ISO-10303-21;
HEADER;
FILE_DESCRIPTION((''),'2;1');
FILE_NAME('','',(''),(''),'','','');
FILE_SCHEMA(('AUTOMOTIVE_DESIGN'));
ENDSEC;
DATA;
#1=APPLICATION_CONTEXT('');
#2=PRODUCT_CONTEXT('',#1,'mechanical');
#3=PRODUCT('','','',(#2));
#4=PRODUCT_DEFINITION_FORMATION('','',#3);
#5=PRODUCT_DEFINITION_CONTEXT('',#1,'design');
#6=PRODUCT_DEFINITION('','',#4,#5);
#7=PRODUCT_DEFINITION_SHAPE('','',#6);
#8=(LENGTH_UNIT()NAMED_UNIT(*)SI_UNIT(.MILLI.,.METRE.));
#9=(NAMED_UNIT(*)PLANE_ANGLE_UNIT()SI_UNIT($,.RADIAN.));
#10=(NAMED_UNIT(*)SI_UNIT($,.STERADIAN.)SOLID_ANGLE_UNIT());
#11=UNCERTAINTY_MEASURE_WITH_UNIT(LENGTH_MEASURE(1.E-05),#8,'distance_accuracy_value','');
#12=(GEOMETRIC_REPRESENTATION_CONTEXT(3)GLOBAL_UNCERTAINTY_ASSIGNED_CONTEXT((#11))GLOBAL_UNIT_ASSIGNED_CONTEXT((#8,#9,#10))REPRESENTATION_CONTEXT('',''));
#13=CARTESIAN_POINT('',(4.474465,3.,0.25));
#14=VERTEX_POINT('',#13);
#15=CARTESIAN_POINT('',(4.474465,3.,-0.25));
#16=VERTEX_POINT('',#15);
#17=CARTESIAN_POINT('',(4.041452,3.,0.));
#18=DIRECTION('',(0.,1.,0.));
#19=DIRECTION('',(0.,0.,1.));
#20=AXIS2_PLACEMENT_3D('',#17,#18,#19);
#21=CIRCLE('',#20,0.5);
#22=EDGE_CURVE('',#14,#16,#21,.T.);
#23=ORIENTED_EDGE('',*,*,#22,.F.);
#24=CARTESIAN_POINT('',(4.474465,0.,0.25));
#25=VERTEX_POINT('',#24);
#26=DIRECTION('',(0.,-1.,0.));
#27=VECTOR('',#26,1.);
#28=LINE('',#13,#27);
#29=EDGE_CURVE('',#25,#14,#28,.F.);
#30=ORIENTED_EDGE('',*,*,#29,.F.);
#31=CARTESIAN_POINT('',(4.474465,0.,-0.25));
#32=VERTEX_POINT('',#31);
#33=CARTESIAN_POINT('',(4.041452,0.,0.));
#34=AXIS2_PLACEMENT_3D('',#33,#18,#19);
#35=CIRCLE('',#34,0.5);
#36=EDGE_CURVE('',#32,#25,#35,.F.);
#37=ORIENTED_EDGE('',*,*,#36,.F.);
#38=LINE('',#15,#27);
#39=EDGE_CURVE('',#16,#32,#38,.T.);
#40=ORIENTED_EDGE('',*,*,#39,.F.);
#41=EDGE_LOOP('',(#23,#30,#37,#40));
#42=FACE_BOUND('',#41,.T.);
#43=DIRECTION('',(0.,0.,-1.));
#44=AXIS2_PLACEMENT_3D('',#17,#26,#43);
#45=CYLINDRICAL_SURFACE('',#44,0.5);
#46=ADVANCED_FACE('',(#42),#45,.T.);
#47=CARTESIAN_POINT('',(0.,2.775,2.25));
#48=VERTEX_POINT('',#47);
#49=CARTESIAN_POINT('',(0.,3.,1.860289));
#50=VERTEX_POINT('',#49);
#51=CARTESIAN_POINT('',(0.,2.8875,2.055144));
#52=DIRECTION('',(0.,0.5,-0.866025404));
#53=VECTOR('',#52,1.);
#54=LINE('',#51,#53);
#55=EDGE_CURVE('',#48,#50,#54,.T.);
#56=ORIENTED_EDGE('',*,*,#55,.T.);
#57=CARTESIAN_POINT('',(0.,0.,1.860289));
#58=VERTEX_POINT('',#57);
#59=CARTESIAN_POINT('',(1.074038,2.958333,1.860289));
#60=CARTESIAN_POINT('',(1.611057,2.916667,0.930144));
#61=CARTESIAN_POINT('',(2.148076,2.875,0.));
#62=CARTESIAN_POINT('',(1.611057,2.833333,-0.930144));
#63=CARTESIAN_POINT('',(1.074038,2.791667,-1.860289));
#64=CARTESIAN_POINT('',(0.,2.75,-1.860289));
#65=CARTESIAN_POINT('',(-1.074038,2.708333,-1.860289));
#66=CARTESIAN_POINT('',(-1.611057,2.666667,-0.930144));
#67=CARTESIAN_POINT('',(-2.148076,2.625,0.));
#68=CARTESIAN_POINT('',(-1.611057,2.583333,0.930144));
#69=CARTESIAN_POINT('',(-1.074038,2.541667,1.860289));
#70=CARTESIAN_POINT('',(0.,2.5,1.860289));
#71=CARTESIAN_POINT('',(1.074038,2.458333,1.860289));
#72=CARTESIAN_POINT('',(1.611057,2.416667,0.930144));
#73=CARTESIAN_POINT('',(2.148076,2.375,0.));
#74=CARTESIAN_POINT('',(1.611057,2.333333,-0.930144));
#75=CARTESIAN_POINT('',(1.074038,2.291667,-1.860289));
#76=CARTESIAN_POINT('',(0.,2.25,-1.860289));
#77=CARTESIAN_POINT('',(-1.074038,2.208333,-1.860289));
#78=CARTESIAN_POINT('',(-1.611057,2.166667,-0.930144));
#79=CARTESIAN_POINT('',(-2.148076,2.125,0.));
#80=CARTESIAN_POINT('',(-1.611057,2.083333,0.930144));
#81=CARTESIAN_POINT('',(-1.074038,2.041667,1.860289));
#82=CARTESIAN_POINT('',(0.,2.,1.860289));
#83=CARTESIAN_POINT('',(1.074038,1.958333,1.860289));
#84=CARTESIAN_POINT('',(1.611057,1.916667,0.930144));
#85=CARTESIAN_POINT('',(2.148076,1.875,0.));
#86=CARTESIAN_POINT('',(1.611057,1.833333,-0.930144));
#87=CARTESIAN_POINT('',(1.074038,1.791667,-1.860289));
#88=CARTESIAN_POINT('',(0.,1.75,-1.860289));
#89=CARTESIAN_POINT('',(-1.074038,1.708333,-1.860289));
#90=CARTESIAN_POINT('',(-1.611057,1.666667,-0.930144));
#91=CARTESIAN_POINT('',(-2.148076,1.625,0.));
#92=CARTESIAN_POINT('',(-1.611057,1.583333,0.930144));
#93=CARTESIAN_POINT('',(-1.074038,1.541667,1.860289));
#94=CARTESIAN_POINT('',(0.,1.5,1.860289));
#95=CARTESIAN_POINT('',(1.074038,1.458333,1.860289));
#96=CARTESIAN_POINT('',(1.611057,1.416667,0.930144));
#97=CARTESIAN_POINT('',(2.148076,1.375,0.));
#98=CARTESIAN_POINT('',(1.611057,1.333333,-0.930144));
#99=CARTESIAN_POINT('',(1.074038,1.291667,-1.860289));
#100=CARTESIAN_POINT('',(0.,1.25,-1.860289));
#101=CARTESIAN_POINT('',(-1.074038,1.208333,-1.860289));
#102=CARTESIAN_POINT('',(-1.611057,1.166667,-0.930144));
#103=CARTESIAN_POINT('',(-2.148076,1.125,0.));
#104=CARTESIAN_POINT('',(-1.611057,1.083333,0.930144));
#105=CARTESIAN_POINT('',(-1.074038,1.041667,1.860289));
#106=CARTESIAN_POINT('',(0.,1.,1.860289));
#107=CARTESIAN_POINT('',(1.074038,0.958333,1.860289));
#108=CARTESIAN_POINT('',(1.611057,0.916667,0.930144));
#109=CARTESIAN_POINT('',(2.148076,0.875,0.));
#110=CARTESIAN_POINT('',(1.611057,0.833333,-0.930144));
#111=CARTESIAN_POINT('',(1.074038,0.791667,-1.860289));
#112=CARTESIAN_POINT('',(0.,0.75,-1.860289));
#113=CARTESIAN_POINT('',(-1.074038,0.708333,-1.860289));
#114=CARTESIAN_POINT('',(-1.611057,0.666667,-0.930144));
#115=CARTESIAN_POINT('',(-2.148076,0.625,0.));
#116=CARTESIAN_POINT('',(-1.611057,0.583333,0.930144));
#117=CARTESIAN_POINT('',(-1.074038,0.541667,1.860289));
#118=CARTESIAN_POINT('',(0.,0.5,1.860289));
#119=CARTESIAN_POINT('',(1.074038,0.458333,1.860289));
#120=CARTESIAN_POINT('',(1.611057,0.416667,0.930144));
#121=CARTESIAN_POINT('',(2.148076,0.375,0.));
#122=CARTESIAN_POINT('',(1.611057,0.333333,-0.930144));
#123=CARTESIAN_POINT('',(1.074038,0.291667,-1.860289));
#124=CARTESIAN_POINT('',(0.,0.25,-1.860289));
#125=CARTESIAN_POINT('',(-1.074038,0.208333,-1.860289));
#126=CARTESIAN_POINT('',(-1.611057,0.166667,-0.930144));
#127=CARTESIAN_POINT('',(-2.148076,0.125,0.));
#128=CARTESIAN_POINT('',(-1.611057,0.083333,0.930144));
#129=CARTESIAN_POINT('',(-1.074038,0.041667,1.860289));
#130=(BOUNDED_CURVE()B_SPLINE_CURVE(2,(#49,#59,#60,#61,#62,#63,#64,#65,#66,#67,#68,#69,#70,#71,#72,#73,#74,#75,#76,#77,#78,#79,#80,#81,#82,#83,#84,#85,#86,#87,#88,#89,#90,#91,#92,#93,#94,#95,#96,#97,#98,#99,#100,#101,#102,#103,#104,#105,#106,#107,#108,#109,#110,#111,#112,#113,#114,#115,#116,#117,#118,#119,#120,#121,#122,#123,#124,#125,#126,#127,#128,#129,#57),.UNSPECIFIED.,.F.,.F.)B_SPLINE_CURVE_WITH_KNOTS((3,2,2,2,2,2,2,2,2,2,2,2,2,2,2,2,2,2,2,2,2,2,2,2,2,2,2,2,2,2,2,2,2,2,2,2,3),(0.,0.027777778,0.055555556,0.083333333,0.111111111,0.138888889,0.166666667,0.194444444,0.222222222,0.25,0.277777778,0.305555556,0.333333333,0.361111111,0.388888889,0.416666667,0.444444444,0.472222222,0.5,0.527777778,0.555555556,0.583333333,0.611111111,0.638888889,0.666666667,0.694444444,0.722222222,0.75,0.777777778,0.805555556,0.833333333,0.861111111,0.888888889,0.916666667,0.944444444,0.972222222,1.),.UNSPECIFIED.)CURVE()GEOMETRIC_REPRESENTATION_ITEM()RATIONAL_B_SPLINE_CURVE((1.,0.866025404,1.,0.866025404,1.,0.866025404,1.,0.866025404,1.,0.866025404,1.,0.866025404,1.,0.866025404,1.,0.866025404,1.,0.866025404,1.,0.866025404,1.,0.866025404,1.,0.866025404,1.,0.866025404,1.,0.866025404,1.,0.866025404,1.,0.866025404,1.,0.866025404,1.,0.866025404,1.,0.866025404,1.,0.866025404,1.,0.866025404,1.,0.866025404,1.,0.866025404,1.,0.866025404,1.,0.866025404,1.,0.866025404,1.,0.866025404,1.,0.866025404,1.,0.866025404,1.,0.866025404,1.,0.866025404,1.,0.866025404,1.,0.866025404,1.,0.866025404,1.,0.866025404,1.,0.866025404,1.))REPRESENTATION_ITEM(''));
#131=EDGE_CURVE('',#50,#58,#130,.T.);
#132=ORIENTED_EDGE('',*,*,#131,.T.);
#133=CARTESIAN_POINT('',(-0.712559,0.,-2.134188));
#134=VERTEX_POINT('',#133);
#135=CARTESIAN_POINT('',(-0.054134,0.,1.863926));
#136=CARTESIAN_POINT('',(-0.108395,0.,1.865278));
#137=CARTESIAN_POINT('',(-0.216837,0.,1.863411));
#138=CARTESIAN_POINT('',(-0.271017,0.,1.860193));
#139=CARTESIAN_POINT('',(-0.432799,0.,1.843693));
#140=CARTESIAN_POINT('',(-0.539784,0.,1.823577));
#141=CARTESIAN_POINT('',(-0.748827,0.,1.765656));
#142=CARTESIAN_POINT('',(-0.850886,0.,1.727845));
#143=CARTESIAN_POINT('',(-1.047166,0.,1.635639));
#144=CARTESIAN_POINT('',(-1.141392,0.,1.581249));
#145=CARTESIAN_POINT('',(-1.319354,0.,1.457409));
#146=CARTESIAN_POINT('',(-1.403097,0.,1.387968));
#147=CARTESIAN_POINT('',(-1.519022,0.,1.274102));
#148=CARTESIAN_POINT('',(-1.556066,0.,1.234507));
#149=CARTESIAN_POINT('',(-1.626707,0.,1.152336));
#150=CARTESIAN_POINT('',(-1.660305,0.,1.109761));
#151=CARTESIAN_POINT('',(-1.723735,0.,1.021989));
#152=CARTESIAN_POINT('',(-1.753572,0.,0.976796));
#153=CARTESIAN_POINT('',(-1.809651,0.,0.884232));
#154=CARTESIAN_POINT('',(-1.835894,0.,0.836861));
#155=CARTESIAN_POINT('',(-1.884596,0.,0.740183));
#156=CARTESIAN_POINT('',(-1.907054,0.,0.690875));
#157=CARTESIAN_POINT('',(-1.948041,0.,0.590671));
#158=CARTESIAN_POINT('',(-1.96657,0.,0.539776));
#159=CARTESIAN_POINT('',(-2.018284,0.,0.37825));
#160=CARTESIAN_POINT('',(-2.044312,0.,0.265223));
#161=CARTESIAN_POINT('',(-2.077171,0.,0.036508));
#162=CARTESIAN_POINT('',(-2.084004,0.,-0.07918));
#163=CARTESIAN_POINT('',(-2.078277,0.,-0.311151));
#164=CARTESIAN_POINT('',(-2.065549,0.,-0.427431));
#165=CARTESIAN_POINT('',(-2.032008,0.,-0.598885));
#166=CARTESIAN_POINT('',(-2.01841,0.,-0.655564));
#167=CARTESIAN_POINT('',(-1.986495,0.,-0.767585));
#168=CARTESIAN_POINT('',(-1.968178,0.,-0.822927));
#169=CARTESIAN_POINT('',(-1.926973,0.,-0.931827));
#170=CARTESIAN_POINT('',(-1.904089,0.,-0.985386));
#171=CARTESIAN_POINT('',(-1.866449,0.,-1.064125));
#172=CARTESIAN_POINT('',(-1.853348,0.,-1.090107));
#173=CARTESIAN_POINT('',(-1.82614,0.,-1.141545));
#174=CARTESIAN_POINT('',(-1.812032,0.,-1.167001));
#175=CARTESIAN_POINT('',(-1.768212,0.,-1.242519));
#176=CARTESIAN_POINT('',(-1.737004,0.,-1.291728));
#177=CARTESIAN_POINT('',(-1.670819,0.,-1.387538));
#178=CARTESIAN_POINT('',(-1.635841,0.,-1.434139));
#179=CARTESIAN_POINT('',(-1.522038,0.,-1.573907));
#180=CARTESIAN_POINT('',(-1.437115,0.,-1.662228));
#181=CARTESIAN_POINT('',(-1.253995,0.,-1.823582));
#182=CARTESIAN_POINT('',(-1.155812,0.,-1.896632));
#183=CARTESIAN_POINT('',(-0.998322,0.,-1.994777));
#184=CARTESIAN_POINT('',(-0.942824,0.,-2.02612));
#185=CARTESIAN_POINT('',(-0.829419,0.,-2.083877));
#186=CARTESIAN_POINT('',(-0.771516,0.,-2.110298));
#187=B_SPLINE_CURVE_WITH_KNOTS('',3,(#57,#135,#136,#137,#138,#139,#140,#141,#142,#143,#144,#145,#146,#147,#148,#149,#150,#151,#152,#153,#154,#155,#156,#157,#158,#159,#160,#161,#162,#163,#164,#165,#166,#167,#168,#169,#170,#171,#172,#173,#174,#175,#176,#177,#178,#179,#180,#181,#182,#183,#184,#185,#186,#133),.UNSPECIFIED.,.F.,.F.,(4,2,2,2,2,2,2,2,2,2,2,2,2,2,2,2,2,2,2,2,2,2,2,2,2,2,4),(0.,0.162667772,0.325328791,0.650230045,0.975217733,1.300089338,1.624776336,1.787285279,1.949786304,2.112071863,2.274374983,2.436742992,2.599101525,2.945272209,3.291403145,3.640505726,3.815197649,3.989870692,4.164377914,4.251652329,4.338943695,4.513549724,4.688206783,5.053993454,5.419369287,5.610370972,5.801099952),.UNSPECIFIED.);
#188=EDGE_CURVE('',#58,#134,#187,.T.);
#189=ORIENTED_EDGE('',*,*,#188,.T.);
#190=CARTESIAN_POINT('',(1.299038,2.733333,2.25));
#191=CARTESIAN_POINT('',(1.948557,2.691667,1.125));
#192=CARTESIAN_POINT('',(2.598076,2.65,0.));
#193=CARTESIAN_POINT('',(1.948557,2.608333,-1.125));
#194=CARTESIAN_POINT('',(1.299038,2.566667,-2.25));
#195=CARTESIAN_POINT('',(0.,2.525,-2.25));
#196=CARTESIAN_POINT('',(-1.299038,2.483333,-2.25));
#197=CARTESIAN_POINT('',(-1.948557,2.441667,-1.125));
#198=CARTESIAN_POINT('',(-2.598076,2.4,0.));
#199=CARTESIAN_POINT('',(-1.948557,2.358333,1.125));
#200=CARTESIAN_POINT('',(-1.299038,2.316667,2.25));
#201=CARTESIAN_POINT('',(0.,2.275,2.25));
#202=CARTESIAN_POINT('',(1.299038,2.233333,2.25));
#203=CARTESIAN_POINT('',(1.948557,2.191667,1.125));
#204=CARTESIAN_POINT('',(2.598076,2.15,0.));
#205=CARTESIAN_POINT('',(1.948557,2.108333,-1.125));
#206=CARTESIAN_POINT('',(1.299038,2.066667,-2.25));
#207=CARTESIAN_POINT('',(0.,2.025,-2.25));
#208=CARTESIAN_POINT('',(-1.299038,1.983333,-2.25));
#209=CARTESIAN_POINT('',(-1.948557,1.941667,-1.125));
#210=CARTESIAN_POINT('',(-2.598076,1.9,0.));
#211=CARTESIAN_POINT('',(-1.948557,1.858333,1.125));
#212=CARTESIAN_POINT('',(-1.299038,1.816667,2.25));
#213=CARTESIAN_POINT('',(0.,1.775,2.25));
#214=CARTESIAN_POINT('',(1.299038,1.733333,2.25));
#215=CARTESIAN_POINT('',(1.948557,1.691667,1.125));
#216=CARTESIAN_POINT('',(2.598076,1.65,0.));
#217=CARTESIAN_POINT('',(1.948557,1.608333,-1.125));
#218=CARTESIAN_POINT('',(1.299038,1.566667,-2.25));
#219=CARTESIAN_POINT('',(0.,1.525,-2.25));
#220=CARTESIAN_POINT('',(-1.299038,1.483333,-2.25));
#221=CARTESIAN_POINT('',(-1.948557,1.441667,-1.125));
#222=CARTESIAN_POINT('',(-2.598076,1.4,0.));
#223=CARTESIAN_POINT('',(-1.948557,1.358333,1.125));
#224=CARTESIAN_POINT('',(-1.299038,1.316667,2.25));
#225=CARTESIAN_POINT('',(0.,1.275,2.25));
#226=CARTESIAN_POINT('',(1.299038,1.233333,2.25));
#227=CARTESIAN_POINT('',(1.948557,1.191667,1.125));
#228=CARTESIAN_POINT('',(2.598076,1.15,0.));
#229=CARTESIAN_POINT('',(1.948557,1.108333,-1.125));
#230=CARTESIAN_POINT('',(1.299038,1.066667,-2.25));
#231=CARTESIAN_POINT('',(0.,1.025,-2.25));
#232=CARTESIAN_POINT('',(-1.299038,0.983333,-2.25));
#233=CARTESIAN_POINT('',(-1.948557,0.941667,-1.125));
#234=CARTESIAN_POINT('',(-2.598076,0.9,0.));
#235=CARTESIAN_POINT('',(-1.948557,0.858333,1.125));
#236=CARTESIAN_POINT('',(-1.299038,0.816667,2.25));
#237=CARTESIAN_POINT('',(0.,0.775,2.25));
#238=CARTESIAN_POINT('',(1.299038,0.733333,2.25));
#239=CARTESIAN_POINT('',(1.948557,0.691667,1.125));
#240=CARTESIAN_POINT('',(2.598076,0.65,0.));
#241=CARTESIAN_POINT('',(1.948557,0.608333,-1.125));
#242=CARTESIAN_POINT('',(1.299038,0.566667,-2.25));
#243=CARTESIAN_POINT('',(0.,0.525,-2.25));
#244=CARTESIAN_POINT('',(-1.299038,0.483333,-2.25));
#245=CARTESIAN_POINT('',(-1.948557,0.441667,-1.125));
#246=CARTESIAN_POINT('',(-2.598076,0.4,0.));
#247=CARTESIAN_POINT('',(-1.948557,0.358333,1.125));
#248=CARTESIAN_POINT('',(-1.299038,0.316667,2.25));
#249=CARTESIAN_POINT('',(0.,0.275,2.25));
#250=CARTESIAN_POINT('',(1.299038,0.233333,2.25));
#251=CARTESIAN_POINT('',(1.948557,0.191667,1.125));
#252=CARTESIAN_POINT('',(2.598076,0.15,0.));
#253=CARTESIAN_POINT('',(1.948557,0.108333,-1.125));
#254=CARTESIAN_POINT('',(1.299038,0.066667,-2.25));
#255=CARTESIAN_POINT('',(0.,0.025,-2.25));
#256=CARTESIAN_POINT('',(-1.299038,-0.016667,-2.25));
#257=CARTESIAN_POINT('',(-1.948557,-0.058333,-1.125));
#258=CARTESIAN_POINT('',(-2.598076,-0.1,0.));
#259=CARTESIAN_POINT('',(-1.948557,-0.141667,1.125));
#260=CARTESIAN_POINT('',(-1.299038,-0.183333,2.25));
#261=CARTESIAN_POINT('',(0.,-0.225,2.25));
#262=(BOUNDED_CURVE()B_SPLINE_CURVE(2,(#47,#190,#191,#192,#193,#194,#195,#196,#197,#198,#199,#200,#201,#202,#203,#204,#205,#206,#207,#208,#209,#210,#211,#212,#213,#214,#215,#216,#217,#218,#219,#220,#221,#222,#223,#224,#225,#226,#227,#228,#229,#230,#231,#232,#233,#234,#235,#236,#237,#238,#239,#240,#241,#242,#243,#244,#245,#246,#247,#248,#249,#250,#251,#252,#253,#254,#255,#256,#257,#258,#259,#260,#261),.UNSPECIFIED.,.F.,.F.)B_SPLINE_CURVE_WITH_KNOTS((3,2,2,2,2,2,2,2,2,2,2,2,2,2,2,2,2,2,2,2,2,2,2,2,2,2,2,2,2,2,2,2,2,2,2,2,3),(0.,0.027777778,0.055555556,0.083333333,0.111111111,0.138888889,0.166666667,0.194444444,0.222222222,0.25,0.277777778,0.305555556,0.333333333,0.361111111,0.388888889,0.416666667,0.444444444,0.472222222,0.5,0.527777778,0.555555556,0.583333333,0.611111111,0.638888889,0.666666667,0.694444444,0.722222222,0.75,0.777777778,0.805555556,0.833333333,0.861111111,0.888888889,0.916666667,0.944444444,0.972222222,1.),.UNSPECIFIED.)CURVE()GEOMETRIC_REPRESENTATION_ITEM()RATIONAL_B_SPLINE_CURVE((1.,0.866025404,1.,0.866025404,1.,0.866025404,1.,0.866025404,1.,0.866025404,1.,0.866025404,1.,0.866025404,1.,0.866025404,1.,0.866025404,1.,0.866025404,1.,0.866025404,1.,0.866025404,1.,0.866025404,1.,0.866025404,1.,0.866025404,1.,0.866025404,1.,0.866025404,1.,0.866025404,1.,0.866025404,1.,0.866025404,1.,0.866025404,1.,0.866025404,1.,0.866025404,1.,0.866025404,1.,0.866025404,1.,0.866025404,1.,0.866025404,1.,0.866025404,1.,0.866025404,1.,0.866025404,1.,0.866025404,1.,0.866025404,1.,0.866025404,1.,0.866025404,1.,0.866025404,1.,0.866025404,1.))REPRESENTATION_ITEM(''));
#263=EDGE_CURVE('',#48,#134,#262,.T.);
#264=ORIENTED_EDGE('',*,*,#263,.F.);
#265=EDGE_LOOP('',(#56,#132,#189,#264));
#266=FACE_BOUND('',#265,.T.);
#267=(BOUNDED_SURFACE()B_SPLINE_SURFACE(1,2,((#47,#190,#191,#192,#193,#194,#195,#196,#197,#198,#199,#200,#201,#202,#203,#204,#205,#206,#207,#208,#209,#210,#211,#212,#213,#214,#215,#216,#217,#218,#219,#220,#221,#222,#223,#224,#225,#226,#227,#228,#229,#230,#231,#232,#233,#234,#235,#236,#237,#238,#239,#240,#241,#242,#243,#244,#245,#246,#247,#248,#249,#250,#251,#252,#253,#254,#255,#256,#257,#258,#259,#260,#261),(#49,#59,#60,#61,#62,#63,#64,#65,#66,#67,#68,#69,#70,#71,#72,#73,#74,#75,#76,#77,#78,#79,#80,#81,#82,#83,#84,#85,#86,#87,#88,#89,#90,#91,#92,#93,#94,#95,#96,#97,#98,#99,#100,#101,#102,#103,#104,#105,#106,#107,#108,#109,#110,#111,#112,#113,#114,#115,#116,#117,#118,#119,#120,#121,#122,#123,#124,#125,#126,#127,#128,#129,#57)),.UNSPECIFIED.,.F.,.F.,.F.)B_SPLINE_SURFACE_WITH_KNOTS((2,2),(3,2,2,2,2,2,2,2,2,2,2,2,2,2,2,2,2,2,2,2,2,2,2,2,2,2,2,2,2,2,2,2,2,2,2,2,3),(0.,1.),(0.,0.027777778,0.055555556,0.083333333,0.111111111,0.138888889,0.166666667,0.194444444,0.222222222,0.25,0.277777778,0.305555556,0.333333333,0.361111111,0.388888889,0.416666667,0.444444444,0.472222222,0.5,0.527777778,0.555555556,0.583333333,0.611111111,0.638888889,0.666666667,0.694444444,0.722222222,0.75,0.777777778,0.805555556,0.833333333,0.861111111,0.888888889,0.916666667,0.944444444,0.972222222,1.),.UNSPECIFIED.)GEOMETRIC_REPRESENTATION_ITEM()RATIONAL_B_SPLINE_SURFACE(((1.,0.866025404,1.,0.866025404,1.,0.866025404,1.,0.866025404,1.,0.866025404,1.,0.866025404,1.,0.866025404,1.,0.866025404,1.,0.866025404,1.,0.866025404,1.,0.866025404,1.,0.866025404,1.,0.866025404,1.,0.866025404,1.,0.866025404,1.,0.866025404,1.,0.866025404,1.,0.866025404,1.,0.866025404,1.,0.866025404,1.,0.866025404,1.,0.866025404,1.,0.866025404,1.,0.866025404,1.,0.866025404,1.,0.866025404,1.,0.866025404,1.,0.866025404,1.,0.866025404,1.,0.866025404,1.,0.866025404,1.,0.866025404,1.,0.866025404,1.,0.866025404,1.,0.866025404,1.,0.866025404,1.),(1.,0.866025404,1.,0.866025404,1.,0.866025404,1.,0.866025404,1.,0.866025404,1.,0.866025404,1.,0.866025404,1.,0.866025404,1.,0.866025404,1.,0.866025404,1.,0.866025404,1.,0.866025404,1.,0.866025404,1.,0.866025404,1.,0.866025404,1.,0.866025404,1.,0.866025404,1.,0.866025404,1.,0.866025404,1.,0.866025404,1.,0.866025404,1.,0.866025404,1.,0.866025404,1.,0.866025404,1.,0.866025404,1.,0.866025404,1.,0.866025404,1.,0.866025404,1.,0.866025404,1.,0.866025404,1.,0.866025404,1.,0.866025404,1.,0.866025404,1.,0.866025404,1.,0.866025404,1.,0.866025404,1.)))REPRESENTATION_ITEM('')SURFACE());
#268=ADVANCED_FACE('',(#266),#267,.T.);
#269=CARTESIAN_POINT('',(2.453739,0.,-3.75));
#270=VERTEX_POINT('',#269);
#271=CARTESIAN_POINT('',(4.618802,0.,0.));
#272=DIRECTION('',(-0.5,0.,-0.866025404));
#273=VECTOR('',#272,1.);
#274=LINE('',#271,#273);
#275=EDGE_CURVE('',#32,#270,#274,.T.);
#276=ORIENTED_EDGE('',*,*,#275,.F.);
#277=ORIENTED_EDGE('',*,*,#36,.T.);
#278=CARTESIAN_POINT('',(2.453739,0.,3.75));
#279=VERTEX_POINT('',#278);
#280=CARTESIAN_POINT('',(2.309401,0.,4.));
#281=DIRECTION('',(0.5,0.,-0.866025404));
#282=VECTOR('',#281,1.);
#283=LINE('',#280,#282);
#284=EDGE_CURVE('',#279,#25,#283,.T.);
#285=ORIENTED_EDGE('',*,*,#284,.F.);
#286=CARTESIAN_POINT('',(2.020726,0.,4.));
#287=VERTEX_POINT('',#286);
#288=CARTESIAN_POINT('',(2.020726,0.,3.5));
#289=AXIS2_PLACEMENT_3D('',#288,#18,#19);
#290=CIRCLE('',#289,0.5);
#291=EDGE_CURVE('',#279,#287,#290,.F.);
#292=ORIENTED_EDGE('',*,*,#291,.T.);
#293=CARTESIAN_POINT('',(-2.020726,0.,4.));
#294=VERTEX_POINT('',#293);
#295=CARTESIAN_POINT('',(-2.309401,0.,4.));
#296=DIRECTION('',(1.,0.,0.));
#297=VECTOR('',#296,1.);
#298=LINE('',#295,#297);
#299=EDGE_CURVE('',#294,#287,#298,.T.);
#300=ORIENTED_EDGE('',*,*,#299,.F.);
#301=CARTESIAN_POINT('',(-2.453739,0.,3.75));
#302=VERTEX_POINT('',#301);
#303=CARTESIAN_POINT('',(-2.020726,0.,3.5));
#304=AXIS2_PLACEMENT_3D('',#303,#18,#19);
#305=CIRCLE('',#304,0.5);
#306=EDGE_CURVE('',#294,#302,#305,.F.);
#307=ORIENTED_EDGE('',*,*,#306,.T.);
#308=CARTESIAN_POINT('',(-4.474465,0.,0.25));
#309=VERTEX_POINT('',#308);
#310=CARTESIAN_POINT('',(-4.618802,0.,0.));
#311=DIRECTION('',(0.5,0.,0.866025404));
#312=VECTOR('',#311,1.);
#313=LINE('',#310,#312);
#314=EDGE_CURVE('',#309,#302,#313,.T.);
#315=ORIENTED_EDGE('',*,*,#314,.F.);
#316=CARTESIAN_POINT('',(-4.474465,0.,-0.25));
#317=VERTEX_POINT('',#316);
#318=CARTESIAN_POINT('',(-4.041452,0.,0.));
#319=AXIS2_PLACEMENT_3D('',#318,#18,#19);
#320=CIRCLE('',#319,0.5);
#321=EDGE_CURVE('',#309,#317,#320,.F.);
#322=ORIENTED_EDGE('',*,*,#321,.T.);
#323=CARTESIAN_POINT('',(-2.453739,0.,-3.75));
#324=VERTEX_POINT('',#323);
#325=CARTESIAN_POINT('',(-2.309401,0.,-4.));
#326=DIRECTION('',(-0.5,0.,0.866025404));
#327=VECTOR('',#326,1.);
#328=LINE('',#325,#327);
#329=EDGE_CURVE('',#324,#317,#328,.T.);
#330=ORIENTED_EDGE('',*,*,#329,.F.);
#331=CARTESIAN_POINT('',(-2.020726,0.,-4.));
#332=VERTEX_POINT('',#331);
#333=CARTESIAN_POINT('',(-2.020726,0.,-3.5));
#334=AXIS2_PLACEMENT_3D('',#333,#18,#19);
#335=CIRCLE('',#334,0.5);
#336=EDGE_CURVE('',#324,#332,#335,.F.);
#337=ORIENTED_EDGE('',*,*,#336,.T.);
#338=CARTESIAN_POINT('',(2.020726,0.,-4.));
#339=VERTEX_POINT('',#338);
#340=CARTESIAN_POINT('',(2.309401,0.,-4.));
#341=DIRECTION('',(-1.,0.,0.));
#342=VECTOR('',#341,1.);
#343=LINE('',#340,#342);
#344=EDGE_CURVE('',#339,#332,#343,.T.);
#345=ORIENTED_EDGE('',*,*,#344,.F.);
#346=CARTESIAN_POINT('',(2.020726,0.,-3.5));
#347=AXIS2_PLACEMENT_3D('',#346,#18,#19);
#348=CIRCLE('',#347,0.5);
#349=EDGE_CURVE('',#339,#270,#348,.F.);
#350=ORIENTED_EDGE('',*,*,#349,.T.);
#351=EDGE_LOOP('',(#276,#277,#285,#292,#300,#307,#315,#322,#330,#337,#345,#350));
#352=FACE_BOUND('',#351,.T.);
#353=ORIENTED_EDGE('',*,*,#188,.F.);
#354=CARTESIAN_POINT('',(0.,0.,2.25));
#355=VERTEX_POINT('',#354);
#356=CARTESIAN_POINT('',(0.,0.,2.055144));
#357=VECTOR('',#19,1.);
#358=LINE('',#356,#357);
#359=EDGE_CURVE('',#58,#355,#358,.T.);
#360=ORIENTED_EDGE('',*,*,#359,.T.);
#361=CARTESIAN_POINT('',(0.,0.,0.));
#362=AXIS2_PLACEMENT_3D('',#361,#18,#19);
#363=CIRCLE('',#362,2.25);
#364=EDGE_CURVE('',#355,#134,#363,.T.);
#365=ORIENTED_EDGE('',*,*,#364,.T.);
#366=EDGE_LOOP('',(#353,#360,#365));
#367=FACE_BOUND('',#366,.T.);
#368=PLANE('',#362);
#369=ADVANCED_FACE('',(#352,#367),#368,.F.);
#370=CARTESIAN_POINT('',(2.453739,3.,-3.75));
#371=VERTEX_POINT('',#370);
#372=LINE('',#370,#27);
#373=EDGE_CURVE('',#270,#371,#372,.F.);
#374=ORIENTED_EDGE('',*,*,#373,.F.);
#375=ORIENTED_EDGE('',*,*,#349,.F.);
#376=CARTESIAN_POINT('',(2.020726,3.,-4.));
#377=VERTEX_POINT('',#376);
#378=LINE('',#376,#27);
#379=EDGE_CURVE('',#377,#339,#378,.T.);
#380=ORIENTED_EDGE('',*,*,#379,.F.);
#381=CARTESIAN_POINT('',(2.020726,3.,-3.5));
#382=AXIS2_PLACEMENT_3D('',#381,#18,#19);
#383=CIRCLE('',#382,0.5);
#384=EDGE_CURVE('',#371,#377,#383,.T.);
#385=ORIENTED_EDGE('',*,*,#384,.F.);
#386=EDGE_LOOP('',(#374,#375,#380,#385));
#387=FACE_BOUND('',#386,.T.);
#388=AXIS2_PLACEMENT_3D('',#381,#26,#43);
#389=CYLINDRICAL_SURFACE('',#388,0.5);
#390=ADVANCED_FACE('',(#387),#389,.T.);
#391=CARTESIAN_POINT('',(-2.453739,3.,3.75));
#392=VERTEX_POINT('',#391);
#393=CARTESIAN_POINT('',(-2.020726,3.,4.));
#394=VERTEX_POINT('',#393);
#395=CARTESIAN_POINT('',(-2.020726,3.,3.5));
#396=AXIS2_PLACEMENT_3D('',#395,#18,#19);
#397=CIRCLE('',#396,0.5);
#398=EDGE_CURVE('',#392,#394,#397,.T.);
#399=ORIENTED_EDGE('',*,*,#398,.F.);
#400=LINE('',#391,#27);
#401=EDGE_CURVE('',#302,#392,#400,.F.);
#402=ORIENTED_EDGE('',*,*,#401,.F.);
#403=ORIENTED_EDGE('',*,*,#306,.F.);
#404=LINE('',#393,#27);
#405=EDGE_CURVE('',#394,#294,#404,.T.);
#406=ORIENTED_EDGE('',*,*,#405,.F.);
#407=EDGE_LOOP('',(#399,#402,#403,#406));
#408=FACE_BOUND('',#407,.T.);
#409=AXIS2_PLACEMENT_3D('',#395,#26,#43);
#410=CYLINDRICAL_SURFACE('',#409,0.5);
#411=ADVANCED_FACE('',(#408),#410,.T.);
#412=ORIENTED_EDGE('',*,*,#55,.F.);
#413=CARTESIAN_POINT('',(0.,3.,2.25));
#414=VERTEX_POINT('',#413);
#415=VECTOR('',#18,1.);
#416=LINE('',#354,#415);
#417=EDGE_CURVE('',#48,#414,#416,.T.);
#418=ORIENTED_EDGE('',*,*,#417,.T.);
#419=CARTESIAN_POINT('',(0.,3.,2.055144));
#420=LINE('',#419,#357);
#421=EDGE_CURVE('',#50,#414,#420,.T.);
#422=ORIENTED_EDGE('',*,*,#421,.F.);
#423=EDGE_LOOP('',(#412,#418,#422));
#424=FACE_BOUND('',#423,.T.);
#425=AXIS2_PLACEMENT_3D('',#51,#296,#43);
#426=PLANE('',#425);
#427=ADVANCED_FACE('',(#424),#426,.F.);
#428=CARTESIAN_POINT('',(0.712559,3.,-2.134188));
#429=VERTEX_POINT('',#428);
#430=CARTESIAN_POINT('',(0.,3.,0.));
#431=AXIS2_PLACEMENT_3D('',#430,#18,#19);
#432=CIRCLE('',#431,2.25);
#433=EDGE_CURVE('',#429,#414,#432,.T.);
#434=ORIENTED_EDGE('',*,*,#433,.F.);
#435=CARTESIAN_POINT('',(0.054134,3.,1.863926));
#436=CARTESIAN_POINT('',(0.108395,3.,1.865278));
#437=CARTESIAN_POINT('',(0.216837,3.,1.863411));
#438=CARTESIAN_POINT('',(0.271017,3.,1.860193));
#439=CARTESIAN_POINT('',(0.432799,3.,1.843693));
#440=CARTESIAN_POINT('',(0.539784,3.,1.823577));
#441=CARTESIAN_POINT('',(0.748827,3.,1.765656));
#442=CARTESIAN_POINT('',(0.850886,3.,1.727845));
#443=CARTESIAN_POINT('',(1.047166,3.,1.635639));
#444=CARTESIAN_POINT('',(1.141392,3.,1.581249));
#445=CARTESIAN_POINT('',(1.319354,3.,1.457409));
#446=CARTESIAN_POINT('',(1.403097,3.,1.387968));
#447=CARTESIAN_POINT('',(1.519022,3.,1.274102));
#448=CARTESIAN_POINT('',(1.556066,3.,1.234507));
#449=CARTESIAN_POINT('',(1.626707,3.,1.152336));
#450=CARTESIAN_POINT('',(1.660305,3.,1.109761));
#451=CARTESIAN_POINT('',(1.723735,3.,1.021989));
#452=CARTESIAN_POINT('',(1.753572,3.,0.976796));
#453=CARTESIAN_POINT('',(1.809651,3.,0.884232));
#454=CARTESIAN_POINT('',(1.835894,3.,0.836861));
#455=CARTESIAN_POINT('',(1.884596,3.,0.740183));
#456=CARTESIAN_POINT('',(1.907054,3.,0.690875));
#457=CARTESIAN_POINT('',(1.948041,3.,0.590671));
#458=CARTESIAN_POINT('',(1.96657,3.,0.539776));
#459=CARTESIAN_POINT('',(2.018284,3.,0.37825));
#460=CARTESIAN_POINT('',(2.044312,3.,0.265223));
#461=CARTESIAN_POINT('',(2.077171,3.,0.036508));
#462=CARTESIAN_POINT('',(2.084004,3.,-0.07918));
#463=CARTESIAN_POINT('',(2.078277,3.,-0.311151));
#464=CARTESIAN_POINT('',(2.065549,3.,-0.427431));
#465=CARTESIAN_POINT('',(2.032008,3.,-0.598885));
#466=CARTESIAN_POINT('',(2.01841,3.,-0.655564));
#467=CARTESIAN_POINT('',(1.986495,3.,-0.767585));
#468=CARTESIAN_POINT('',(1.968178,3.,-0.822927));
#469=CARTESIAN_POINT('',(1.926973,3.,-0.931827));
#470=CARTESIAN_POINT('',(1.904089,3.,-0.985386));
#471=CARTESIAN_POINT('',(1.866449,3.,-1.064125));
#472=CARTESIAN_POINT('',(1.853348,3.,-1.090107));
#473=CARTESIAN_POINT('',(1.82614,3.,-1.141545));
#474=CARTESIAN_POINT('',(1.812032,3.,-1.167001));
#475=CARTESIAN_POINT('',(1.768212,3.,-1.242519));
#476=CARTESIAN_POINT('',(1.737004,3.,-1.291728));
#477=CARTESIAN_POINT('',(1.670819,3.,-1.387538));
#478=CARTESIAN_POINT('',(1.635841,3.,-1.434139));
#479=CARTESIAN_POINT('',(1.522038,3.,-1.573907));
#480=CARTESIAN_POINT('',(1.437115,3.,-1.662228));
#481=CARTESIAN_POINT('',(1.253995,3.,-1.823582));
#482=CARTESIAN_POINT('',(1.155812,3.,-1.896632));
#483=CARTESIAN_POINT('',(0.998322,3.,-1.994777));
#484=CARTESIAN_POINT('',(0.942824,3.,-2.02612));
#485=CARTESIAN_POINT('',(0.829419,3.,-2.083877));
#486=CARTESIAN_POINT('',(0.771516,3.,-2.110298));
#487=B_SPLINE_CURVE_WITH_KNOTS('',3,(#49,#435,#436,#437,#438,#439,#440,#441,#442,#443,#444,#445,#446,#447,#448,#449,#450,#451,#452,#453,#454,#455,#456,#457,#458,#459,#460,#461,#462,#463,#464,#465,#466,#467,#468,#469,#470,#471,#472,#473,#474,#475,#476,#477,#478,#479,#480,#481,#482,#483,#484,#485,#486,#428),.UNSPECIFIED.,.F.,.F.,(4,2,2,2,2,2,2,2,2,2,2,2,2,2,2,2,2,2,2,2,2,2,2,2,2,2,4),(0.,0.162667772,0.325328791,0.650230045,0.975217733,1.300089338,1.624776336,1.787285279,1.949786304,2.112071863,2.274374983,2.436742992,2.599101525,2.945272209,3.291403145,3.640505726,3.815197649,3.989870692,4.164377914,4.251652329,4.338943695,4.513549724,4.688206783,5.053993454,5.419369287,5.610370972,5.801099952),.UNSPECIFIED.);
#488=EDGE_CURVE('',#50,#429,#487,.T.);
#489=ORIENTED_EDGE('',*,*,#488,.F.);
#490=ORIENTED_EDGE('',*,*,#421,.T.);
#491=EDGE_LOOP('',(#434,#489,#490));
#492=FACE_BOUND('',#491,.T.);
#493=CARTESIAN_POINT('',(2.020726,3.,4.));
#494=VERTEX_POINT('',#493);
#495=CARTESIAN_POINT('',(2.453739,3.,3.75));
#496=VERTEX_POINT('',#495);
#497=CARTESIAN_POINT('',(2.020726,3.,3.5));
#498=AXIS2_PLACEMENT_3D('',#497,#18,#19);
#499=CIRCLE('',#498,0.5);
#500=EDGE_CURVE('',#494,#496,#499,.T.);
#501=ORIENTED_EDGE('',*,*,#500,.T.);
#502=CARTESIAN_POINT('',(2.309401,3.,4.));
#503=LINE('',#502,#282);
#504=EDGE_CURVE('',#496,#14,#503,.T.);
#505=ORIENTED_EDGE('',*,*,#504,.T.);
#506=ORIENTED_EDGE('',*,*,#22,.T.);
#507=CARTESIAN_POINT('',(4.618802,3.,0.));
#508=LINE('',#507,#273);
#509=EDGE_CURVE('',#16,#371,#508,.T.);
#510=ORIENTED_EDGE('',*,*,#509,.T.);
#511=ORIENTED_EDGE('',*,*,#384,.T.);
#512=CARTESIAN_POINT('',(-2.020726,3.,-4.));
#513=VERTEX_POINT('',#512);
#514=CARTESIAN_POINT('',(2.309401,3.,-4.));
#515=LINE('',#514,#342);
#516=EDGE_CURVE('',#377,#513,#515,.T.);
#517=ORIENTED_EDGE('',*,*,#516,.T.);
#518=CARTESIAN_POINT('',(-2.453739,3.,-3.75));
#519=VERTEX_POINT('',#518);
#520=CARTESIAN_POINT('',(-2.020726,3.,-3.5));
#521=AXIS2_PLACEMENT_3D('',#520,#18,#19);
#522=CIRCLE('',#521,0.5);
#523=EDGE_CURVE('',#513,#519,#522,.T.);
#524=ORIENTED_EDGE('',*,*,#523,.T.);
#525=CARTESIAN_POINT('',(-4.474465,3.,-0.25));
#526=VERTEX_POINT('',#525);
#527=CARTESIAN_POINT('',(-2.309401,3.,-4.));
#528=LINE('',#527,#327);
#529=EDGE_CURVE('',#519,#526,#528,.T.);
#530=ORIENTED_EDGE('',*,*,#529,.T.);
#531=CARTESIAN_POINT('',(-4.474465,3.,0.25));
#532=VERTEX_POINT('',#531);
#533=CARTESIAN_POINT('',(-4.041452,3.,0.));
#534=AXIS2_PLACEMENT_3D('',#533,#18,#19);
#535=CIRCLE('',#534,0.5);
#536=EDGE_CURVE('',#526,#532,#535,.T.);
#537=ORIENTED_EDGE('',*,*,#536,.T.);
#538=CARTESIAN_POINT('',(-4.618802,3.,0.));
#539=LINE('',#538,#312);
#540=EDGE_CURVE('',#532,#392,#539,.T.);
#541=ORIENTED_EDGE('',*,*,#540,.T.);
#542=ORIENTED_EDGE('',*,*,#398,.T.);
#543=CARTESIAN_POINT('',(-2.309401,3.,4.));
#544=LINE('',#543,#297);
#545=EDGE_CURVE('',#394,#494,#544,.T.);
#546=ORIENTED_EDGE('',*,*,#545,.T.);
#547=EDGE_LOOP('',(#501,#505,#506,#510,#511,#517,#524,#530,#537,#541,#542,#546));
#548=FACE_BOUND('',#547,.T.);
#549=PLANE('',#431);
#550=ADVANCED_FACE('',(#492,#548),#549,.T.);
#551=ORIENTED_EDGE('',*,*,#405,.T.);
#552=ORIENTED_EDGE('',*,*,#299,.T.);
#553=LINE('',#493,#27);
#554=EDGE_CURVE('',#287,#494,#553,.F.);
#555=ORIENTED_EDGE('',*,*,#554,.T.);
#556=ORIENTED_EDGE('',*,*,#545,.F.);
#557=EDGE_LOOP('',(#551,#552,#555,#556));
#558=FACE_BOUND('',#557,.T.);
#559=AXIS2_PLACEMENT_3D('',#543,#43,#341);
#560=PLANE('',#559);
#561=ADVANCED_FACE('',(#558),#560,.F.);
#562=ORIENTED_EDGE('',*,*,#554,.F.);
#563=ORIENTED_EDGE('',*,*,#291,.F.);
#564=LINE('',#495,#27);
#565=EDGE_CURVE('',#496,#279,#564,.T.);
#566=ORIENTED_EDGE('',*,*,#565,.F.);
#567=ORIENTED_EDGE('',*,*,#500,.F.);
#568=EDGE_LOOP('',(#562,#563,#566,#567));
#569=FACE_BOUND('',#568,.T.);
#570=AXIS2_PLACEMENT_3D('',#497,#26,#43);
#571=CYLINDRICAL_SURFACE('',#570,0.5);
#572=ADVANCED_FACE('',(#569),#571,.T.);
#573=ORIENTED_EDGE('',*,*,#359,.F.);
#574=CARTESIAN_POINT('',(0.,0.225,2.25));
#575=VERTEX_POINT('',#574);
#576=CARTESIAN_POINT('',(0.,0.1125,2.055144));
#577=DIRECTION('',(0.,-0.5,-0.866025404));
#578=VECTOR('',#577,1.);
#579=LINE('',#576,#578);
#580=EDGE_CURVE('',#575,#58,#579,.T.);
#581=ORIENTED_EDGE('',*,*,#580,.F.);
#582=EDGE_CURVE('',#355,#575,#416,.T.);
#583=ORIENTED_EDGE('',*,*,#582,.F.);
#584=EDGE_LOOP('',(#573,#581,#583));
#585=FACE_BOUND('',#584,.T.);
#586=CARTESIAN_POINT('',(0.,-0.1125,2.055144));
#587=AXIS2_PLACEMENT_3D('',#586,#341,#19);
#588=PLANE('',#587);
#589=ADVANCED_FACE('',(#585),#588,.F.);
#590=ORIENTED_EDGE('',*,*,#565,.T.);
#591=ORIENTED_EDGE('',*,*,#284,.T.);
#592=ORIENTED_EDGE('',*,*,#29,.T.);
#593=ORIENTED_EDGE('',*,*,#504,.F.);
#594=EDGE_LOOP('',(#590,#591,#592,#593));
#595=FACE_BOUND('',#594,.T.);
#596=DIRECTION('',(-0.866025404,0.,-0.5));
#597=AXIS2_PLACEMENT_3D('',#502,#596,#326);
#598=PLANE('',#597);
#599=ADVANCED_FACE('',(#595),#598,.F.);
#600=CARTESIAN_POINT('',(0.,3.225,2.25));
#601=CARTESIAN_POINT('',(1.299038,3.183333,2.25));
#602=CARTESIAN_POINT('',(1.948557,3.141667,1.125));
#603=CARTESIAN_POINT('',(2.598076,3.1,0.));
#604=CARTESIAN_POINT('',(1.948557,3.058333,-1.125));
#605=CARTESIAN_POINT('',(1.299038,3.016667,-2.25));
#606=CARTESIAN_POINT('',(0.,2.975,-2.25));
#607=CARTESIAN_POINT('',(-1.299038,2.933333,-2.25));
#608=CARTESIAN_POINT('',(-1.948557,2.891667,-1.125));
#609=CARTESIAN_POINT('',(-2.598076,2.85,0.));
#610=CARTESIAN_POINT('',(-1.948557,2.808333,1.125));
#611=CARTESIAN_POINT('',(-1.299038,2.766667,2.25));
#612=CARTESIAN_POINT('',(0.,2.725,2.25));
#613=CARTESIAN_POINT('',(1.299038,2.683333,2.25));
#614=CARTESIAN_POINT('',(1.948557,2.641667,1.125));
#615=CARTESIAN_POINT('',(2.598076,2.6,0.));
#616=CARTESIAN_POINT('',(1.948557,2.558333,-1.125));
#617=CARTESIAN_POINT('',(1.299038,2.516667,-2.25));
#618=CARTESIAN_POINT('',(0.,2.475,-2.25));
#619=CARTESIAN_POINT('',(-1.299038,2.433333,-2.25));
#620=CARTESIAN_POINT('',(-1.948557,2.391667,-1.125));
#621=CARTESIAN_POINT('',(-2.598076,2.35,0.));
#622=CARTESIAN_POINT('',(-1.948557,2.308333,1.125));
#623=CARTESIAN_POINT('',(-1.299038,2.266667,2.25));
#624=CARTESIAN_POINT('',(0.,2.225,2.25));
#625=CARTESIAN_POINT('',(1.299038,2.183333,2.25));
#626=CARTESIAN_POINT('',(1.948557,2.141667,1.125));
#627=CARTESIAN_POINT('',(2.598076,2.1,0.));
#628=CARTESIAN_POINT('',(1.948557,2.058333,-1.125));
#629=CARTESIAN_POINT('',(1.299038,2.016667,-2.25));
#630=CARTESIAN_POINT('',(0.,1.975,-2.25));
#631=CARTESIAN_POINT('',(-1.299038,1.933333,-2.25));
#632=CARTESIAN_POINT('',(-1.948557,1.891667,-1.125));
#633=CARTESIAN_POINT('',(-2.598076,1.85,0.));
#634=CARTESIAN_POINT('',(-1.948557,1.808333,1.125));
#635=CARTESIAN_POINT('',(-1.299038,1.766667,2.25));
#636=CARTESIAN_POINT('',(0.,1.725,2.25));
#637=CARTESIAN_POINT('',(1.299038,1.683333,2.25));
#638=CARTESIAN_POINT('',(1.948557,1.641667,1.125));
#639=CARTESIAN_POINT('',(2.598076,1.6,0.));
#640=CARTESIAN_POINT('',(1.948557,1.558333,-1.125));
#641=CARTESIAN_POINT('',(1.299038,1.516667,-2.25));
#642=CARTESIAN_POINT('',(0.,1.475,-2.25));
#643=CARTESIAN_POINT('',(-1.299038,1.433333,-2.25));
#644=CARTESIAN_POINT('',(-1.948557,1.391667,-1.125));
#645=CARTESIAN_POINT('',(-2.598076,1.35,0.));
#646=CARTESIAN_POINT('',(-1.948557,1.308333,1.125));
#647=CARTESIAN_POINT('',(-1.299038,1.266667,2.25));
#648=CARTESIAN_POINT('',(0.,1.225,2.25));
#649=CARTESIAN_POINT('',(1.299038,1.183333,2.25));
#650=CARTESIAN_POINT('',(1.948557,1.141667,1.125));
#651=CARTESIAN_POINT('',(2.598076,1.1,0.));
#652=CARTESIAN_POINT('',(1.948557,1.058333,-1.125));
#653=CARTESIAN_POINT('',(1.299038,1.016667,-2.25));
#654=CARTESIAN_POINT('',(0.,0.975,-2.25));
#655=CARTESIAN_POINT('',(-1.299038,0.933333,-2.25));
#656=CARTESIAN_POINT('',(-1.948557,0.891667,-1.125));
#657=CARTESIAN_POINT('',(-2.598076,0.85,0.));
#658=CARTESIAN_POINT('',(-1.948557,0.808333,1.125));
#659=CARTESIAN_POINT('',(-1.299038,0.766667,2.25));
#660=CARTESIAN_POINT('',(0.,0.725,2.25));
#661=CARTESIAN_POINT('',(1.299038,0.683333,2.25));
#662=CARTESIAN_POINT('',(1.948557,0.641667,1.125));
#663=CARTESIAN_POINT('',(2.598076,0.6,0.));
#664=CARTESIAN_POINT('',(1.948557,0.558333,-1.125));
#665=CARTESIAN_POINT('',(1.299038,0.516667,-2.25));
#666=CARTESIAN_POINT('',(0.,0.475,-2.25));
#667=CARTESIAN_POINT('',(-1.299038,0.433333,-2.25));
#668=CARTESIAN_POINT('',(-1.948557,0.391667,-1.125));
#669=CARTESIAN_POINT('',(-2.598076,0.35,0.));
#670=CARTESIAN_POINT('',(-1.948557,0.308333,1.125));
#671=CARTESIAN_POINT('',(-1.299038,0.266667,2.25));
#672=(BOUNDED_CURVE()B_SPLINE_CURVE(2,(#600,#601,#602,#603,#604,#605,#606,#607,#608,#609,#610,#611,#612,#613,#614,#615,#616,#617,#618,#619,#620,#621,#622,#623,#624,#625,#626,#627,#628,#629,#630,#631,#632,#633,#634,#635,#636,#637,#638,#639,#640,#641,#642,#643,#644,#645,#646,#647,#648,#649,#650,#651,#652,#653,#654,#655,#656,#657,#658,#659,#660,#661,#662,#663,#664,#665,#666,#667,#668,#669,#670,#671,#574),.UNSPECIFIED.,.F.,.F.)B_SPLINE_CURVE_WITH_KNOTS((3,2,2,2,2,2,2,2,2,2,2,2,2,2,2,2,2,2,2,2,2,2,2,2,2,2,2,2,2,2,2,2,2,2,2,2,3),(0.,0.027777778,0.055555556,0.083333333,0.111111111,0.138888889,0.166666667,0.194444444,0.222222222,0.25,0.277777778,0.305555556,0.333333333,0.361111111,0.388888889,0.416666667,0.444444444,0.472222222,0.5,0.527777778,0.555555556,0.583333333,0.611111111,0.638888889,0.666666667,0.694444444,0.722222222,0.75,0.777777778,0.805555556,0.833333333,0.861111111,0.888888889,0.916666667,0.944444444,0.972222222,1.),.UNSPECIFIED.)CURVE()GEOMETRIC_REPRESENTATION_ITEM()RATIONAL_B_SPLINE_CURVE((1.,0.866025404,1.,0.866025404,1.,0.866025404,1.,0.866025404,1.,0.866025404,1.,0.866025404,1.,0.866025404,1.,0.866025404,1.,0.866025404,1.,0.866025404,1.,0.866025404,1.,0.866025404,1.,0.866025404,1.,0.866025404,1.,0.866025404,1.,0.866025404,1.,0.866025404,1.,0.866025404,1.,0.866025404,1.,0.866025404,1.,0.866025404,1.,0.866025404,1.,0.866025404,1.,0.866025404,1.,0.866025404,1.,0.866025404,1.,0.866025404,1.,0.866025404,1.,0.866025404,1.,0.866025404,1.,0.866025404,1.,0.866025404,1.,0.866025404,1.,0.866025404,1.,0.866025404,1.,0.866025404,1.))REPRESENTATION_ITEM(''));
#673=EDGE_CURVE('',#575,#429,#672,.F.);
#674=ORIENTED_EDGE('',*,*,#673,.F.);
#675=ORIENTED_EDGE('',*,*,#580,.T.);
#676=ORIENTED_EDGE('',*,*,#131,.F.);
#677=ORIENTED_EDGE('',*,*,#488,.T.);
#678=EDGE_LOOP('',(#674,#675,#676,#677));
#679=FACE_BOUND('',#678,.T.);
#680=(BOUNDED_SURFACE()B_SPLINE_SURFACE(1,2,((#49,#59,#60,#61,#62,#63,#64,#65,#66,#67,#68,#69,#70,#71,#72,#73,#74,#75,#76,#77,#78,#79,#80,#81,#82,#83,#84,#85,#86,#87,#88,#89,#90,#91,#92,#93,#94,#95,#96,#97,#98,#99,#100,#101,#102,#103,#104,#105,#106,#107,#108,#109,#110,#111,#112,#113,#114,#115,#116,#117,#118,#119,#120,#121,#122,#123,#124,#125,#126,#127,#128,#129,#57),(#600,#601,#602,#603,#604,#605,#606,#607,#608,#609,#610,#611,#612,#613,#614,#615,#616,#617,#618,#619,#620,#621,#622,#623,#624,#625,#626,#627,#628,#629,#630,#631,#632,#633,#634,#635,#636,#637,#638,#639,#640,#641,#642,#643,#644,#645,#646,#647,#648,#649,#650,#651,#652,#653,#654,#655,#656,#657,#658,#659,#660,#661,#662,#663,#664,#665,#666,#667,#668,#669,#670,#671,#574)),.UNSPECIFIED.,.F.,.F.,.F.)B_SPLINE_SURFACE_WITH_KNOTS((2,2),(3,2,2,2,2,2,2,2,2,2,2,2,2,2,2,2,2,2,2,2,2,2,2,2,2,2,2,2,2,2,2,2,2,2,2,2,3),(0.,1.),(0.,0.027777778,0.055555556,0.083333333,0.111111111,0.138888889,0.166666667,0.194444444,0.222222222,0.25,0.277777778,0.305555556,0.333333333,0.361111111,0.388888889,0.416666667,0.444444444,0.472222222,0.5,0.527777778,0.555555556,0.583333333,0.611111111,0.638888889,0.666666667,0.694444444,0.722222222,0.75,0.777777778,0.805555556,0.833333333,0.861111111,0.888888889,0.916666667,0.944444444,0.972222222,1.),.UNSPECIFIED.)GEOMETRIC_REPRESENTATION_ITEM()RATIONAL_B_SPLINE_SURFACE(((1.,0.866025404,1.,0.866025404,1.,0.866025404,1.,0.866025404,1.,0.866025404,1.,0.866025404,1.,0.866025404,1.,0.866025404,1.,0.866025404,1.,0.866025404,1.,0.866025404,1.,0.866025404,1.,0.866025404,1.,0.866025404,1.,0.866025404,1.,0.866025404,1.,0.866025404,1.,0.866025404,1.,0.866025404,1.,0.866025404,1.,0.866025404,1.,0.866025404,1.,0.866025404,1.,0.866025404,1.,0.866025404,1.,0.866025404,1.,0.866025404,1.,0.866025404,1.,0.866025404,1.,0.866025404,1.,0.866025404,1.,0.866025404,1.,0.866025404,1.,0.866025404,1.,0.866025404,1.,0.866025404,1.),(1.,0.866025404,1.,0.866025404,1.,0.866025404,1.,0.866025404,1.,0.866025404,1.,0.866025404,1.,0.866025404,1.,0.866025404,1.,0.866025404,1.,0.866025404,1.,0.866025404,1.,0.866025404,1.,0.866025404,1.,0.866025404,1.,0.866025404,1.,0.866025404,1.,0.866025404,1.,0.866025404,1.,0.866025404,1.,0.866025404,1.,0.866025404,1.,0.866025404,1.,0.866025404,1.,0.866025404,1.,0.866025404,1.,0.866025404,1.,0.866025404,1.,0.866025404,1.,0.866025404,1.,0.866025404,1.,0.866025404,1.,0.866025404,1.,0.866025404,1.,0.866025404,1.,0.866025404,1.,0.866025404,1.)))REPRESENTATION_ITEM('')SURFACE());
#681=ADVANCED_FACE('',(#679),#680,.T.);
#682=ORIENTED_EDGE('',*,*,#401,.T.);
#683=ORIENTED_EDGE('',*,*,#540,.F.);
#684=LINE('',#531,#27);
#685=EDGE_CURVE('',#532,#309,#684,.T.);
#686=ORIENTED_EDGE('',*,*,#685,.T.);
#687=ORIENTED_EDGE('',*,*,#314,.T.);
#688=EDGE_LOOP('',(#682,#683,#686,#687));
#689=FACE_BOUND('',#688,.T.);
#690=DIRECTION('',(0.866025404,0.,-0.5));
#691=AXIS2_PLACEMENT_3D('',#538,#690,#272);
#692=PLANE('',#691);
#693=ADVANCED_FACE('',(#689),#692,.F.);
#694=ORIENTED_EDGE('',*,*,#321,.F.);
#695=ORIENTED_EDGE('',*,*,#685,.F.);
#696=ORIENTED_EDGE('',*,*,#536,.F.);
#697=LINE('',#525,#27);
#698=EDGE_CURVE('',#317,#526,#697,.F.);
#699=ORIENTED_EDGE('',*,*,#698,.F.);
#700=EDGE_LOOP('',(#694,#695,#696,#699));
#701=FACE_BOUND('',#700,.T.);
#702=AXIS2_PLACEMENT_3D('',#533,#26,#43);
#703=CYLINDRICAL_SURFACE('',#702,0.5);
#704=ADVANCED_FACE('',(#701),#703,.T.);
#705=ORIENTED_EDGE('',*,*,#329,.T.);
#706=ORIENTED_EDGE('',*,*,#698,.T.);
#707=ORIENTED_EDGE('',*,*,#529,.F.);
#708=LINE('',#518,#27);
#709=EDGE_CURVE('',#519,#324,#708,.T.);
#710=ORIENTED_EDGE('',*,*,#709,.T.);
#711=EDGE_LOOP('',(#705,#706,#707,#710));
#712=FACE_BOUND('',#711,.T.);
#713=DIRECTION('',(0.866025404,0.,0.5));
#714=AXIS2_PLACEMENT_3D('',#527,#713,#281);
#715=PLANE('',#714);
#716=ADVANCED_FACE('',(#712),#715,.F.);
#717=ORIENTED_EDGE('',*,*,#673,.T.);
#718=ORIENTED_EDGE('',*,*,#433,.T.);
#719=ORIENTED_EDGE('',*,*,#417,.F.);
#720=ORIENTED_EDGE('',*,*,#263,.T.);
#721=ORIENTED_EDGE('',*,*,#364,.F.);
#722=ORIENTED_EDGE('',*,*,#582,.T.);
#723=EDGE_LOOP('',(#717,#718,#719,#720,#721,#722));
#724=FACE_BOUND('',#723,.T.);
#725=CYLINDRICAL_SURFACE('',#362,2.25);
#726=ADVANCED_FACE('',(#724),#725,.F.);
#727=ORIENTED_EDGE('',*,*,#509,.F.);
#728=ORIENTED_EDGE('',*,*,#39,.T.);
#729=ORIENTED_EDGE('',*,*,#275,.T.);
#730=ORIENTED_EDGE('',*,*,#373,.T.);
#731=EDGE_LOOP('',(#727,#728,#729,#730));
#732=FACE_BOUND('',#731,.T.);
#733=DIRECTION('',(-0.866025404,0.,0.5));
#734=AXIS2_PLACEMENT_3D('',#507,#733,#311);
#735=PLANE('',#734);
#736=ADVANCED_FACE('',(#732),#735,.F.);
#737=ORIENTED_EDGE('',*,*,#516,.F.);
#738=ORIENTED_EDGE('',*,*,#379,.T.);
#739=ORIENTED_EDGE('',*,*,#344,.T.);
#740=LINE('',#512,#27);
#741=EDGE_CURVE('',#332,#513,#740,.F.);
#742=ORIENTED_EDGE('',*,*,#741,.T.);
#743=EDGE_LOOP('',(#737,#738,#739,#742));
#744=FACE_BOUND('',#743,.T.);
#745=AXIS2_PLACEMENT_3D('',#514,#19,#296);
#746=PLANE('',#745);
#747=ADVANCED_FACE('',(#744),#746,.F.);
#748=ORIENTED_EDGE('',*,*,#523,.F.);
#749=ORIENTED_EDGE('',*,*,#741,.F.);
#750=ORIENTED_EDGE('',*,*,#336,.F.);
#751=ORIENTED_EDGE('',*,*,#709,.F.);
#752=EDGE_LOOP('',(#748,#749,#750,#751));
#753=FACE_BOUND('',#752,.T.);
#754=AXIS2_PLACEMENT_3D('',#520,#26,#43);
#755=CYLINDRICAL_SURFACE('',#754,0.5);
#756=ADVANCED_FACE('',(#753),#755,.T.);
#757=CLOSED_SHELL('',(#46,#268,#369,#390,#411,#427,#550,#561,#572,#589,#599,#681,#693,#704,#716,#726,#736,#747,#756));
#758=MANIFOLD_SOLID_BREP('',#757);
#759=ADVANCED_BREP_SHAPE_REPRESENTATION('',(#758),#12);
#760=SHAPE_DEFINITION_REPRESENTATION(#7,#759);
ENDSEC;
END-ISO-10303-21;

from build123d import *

# Parameters (mm, degrees)
BOSS_EXTRUDE1_DEPTH = 3
SKETCH2_R           = 2.25
CUT_EXTRUDE1_DEPTH  = 7.806859286
FILLET1_R           = 0.5
SWEEP3_PITCH        = 0.5


with BuildPart() as part:
    # Sketch1 → Boss-Extrude1 (new body)
    with BuildSketch(Plane(origin=(0, 0, 0), x_dir=(1, 0, 0), z_dir=(0, 1, 0))):
        Polygon((2.309401077, -4), (4.618802154, 0), (2.309401077, 4), (-2.309401077, 4), (-4.618802154, 0), (-2.309401077, -4), align=None)
    extrude(amount=BOSS_EXTRUDE1_DEPTH)

    # Sketch2 → Cut-Extrude1 (cut, through all)
    with BuildSketch(Plane(origin=(0, 3, 0), x_dir=(1, 0, 0), z_dir=(0, 1, 0))):
        with Locations(Location((0, 0, 0), (0, 0, 270))):
            Circle(SKETCH2_R)
    extrude(amount=-CUT_EXTRUDE1_DEPTH, mode=Mode.SUBTRACT)

    # Fillet1
    fillet1_edges = [part.edges().sort_by_distance(p)[0] for p in [
        (-2.309401077, 1.5, 4),
        (-4.618802154, 1.5, 0),
        (-2.309401077, 1.5, -4),
        (2.309401077, 1.5, -4),
        (4.618802154, 1.5, 0),
        (2.309401077, 1.5, 4),
    ]]
    fillet(fillet1_edges, radius=FILLET1_R)

    # Sweep3: the profile of Sketch5 profile screwed along a left-hand helix of 6 turns, 6 arcs to a turn; built about Z, then put on its axis
    sweep3_z = Axis((0, 0, 0), (0, 0, 1))
    sweep3_corners = [(2.2503, 0, 0.225173205), (1.860288568, 0, 0), (2.2503, 0, -0.225173205)]
    with BuildLine(mode=Mode.PRIVATE) as sweep3_profile:
        Line(sweep3_corners[0], sweep3_corners[1])
        Line(sweep3_corners[1], sweep3_corners[2])
        Line(sweep3_corners[2], sweep3_corners[0])
    sweep3_cap = Face(sweep3_profile.wire())
    sweep3_turn_angles = [0, -30, -60, -90, -120, -150, -180, -210, -240, -270, -300, -330, -360]
    sweep3_turn_weights = [1, 0.8660254037844387, 1, 0.8660254037844387, 1, 0.8660254037844387, 1, 0.8660254037844387, 1, 0.8660254037844387, 1, 0.8660254037844387, 1]
    sweep3_turn_rails = [Edge.make_bspline([Vector(p[0], p[1], 0).rotate(sweep3_z, sweep3_turn_angles[k]) / sweep3_turn_weights[k] + Vector(0, 0, p[2] + -SWEEP3_PITCH * sweep3_turn_angles[k] / 360) for k in range(13)], [0, 0, 0, 1, 1, 2, 2, 3, 3, 4, 4, 5, 5, 6, 6, 6], 2, sweep3_turn_weights) for p in sweep3_corners]
    sweep3_turn_sides = [Face.make_surface_from_curves(sweep3_turn_rails[p[0]], sweep3_turn_rails[p[1]]) for p in [(0, 1), (1, 2), (2, 0)]]
    sweep3 = Plane(origin=(0, 3, 0), x_dir=(0, 0, 1), z_dir=(0, -1, 0)) * Solid(Shell([*[p.moved(Location((0, 0, SWEEP3_PITCH * i))) for i in range(6) for p in sweep3_turn_sides], sweep3_cap, sweep3_cap.rotate(sweep3_z, -2160).moved(Location((0, 0, -SWEEP3_PITCH * -2160 / 360)))]))
    add(sweep3)

    # SurfaceCut1
    split(bisect_by=Plane(origin=(0, 3, 0), x_dir=(1, 0, 0), z_dir=(0, 1, 0)), keep=Keep.BOTTOM)

    # SurfaceCut2
    split(bisect_by=Plane(origin=(0, 0, 0), x_dir=(-1, 0, 0), z_dir=(0, -1, 0)), keep=Keep.BOTTOM)


solid = part.part
